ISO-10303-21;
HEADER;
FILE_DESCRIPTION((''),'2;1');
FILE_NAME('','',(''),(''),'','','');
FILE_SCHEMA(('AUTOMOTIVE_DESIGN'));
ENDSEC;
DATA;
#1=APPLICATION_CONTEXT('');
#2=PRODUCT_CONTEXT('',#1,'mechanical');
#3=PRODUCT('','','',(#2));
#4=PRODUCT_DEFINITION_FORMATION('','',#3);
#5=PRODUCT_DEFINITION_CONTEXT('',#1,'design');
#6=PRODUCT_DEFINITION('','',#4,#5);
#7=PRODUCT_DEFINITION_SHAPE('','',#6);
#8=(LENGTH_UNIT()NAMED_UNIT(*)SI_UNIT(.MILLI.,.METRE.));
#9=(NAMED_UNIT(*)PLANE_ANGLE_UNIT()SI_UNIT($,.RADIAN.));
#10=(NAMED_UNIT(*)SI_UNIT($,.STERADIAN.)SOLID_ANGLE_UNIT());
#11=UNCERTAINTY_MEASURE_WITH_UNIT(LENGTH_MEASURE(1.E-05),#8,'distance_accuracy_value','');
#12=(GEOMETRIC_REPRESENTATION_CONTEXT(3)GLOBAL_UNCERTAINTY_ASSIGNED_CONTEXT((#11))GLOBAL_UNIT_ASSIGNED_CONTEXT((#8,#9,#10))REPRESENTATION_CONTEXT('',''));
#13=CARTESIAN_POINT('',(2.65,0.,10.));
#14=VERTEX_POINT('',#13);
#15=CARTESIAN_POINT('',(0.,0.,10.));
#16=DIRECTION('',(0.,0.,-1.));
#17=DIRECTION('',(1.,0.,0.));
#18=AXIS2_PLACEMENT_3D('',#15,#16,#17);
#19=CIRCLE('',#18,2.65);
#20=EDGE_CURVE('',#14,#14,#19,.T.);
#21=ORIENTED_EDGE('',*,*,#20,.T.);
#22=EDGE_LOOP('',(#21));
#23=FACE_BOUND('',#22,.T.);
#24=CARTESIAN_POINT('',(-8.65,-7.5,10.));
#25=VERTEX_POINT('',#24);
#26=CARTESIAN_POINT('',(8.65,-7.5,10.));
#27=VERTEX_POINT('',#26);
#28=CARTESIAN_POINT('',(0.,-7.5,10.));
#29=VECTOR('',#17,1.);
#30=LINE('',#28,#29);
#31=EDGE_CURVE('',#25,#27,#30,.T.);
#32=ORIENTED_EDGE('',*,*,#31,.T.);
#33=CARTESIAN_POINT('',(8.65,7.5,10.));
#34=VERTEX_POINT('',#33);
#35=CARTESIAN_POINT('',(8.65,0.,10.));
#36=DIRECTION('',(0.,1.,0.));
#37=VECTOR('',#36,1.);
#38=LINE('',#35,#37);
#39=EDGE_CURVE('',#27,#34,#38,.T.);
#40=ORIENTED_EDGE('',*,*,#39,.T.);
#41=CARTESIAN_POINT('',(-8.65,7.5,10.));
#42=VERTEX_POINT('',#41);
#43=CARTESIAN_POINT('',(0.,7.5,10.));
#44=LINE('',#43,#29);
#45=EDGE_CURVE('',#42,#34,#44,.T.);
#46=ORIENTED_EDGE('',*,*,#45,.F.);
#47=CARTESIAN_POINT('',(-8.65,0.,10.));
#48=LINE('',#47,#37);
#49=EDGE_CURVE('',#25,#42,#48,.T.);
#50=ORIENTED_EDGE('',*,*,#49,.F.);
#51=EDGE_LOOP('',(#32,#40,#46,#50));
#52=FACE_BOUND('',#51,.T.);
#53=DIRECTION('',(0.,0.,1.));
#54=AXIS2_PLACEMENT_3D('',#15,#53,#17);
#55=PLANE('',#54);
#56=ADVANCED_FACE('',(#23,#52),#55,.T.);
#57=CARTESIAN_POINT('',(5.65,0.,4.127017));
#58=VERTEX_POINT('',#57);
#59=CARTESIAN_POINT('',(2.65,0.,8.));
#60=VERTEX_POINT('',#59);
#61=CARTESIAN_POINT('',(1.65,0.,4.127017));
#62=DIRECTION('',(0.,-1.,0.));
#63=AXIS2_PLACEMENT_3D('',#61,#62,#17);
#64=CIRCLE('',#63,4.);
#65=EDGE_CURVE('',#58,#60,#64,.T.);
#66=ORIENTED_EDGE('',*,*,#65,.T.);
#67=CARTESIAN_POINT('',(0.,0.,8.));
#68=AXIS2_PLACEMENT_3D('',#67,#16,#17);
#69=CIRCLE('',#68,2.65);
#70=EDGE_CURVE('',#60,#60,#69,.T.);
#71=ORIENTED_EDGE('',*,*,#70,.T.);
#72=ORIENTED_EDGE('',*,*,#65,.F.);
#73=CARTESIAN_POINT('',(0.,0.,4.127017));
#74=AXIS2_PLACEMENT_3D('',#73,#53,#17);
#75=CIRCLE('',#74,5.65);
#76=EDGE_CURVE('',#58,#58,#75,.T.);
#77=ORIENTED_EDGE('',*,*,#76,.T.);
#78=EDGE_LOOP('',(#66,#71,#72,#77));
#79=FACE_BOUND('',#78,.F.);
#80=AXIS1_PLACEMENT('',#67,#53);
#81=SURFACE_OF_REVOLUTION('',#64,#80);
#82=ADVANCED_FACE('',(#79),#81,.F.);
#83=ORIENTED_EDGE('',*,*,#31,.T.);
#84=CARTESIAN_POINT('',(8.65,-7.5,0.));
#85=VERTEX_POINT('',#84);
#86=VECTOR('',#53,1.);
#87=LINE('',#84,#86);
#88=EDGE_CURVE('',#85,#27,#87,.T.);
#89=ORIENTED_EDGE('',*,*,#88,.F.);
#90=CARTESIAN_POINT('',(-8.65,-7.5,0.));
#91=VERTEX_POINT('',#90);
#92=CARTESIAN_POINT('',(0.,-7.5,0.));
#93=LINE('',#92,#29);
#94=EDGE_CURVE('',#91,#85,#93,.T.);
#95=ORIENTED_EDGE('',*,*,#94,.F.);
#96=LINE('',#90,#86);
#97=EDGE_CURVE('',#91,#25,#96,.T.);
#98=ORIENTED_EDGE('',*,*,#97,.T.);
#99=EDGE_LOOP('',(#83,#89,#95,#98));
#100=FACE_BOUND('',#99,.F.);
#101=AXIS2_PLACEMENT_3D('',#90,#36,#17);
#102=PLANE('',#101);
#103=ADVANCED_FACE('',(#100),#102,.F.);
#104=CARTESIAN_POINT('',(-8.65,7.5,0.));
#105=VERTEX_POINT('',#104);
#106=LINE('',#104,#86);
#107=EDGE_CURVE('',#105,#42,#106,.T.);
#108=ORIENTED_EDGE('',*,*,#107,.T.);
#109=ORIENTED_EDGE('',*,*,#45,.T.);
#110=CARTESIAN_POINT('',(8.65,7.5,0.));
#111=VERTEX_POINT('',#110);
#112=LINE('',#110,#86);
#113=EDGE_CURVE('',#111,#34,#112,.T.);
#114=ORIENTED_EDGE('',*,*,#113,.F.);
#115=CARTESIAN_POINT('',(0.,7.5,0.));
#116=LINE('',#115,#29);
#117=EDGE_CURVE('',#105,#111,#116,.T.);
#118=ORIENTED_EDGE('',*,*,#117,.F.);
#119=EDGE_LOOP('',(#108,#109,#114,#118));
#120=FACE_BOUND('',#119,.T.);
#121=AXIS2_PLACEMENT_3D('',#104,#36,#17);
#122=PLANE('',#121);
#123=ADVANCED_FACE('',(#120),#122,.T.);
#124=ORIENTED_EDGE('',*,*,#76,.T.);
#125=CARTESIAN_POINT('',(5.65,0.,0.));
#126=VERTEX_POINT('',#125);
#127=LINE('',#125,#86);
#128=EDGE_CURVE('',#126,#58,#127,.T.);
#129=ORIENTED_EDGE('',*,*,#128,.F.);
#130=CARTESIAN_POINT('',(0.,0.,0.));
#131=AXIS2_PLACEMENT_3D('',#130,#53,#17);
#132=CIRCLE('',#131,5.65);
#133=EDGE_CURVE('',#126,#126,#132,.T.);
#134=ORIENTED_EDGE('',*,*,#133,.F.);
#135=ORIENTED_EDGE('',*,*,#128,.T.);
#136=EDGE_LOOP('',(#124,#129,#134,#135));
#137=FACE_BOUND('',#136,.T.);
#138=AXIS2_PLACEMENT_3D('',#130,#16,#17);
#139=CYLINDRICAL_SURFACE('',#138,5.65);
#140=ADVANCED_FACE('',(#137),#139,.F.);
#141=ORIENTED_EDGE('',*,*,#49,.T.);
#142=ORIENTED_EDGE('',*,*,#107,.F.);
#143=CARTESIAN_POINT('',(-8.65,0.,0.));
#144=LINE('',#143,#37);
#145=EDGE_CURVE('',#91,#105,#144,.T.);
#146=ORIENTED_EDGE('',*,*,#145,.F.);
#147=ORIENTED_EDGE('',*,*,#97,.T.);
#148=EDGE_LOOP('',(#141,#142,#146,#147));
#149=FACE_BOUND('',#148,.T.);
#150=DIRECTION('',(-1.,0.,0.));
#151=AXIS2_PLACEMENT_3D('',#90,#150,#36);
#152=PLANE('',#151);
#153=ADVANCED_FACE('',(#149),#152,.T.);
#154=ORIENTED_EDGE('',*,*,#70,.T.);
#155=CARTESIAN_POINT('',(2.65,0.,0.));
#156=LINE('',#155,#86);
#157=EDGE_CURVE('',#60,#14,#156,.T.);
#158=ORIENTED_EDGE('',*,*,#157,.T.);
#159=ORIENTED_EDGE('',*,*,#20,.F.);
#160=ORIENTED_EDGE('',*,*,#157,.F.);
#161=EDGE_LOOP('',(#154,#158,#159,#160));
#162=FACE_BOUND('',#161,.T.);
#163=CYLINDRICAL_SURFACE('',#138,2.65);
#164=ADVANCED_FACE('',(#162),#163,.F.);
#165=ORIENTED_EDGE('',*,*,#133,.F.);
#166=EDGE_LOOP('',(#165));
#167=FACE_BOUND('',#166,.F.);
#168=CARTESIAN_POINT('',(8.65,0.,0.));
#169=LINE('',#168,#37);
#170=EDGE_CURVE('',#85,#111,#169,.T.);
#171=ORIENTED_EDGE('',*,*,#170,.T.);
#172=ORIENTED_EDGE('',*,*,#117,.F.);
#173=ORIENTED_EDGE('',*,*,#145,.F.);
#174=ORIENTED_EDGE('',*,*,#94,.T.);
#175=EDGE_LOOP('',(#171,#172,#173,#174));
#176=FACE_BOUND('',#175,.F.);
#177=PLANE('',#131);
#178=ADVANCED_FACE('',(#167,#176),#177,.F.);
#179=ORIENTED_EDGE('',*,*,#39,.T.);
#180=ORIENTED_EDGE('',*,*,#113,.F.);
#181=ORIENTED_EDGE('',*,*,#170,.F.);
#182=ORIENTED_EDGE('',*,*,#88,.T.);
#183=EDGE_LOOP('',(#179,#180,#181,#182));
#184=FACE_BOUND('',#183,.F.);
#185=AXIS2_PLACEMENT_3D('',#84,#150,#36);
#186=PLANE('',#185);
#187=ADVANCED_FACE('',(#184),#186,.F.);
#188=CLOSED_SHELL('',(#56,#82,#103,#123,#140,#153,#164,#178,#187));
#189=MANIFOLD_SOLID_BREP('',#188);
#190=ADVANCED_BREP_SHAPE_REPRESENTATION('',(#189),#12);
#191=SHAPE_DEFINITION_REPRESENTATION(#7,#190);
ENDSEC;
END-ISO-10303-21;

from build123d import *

# Parameters (mm, degrees)
F0_W     = 17.3
F0_H     = 15
F0_R     = 5.65
F1_DEPTH = 10
F2_DEPTH = 8
F3_R     = 2.65
F4_DEPTH = 16.1


# Not quite as in the source:
# - a fillet or chamfer that OpenCascade refuses, or shapes differently, is made with other operations: its cross-section is extruded or revolved along the edge and cut away or added


with BuildPart() as f1:
    # F0 (on Top) → F1 (new body)
    with BuildSketch(Plane.XY):
        Rectangle(F0_W, F0_H)
        Circle(F0_R, mode=Mode.SUBTRACT)
        Circle(F0_R)
    extrude(amount=F1_DEPTH)

    # F0 (on Top) → F2 (cut)
    with BuildSketch(Plane.XY):
        Circle(F0_R)
    extrude(amount=F2_DEPTH, mode=Mode.SUBTRACT)

    # F3 (on face) → F4 (cut)
    with BuildSketch(Plane.XY):
        Circle(F3_R)
    extrude(amount=F4_DEPTH, mode=Mode.SUBTRACT)

    # F5: fillet of radius 4 on 1 edges, made by hand

    # F5_s1 → F5_t2 (revolve)
    with BuildSketch(Plane.XZ):
        with BuildLine():
            ThreePointArc((5.65, 4.1270166538), (4.8122776602, 6.5765063966), (2.65, 8))
            Line((2.65, 8), (5.65, 8))
            Line((5.65, 8), (5.65, 4.1270166538))
        make_face()
    revolve(axis=Axis((0, 0, 8), (0, 0, 1)))


solid = f1.part
